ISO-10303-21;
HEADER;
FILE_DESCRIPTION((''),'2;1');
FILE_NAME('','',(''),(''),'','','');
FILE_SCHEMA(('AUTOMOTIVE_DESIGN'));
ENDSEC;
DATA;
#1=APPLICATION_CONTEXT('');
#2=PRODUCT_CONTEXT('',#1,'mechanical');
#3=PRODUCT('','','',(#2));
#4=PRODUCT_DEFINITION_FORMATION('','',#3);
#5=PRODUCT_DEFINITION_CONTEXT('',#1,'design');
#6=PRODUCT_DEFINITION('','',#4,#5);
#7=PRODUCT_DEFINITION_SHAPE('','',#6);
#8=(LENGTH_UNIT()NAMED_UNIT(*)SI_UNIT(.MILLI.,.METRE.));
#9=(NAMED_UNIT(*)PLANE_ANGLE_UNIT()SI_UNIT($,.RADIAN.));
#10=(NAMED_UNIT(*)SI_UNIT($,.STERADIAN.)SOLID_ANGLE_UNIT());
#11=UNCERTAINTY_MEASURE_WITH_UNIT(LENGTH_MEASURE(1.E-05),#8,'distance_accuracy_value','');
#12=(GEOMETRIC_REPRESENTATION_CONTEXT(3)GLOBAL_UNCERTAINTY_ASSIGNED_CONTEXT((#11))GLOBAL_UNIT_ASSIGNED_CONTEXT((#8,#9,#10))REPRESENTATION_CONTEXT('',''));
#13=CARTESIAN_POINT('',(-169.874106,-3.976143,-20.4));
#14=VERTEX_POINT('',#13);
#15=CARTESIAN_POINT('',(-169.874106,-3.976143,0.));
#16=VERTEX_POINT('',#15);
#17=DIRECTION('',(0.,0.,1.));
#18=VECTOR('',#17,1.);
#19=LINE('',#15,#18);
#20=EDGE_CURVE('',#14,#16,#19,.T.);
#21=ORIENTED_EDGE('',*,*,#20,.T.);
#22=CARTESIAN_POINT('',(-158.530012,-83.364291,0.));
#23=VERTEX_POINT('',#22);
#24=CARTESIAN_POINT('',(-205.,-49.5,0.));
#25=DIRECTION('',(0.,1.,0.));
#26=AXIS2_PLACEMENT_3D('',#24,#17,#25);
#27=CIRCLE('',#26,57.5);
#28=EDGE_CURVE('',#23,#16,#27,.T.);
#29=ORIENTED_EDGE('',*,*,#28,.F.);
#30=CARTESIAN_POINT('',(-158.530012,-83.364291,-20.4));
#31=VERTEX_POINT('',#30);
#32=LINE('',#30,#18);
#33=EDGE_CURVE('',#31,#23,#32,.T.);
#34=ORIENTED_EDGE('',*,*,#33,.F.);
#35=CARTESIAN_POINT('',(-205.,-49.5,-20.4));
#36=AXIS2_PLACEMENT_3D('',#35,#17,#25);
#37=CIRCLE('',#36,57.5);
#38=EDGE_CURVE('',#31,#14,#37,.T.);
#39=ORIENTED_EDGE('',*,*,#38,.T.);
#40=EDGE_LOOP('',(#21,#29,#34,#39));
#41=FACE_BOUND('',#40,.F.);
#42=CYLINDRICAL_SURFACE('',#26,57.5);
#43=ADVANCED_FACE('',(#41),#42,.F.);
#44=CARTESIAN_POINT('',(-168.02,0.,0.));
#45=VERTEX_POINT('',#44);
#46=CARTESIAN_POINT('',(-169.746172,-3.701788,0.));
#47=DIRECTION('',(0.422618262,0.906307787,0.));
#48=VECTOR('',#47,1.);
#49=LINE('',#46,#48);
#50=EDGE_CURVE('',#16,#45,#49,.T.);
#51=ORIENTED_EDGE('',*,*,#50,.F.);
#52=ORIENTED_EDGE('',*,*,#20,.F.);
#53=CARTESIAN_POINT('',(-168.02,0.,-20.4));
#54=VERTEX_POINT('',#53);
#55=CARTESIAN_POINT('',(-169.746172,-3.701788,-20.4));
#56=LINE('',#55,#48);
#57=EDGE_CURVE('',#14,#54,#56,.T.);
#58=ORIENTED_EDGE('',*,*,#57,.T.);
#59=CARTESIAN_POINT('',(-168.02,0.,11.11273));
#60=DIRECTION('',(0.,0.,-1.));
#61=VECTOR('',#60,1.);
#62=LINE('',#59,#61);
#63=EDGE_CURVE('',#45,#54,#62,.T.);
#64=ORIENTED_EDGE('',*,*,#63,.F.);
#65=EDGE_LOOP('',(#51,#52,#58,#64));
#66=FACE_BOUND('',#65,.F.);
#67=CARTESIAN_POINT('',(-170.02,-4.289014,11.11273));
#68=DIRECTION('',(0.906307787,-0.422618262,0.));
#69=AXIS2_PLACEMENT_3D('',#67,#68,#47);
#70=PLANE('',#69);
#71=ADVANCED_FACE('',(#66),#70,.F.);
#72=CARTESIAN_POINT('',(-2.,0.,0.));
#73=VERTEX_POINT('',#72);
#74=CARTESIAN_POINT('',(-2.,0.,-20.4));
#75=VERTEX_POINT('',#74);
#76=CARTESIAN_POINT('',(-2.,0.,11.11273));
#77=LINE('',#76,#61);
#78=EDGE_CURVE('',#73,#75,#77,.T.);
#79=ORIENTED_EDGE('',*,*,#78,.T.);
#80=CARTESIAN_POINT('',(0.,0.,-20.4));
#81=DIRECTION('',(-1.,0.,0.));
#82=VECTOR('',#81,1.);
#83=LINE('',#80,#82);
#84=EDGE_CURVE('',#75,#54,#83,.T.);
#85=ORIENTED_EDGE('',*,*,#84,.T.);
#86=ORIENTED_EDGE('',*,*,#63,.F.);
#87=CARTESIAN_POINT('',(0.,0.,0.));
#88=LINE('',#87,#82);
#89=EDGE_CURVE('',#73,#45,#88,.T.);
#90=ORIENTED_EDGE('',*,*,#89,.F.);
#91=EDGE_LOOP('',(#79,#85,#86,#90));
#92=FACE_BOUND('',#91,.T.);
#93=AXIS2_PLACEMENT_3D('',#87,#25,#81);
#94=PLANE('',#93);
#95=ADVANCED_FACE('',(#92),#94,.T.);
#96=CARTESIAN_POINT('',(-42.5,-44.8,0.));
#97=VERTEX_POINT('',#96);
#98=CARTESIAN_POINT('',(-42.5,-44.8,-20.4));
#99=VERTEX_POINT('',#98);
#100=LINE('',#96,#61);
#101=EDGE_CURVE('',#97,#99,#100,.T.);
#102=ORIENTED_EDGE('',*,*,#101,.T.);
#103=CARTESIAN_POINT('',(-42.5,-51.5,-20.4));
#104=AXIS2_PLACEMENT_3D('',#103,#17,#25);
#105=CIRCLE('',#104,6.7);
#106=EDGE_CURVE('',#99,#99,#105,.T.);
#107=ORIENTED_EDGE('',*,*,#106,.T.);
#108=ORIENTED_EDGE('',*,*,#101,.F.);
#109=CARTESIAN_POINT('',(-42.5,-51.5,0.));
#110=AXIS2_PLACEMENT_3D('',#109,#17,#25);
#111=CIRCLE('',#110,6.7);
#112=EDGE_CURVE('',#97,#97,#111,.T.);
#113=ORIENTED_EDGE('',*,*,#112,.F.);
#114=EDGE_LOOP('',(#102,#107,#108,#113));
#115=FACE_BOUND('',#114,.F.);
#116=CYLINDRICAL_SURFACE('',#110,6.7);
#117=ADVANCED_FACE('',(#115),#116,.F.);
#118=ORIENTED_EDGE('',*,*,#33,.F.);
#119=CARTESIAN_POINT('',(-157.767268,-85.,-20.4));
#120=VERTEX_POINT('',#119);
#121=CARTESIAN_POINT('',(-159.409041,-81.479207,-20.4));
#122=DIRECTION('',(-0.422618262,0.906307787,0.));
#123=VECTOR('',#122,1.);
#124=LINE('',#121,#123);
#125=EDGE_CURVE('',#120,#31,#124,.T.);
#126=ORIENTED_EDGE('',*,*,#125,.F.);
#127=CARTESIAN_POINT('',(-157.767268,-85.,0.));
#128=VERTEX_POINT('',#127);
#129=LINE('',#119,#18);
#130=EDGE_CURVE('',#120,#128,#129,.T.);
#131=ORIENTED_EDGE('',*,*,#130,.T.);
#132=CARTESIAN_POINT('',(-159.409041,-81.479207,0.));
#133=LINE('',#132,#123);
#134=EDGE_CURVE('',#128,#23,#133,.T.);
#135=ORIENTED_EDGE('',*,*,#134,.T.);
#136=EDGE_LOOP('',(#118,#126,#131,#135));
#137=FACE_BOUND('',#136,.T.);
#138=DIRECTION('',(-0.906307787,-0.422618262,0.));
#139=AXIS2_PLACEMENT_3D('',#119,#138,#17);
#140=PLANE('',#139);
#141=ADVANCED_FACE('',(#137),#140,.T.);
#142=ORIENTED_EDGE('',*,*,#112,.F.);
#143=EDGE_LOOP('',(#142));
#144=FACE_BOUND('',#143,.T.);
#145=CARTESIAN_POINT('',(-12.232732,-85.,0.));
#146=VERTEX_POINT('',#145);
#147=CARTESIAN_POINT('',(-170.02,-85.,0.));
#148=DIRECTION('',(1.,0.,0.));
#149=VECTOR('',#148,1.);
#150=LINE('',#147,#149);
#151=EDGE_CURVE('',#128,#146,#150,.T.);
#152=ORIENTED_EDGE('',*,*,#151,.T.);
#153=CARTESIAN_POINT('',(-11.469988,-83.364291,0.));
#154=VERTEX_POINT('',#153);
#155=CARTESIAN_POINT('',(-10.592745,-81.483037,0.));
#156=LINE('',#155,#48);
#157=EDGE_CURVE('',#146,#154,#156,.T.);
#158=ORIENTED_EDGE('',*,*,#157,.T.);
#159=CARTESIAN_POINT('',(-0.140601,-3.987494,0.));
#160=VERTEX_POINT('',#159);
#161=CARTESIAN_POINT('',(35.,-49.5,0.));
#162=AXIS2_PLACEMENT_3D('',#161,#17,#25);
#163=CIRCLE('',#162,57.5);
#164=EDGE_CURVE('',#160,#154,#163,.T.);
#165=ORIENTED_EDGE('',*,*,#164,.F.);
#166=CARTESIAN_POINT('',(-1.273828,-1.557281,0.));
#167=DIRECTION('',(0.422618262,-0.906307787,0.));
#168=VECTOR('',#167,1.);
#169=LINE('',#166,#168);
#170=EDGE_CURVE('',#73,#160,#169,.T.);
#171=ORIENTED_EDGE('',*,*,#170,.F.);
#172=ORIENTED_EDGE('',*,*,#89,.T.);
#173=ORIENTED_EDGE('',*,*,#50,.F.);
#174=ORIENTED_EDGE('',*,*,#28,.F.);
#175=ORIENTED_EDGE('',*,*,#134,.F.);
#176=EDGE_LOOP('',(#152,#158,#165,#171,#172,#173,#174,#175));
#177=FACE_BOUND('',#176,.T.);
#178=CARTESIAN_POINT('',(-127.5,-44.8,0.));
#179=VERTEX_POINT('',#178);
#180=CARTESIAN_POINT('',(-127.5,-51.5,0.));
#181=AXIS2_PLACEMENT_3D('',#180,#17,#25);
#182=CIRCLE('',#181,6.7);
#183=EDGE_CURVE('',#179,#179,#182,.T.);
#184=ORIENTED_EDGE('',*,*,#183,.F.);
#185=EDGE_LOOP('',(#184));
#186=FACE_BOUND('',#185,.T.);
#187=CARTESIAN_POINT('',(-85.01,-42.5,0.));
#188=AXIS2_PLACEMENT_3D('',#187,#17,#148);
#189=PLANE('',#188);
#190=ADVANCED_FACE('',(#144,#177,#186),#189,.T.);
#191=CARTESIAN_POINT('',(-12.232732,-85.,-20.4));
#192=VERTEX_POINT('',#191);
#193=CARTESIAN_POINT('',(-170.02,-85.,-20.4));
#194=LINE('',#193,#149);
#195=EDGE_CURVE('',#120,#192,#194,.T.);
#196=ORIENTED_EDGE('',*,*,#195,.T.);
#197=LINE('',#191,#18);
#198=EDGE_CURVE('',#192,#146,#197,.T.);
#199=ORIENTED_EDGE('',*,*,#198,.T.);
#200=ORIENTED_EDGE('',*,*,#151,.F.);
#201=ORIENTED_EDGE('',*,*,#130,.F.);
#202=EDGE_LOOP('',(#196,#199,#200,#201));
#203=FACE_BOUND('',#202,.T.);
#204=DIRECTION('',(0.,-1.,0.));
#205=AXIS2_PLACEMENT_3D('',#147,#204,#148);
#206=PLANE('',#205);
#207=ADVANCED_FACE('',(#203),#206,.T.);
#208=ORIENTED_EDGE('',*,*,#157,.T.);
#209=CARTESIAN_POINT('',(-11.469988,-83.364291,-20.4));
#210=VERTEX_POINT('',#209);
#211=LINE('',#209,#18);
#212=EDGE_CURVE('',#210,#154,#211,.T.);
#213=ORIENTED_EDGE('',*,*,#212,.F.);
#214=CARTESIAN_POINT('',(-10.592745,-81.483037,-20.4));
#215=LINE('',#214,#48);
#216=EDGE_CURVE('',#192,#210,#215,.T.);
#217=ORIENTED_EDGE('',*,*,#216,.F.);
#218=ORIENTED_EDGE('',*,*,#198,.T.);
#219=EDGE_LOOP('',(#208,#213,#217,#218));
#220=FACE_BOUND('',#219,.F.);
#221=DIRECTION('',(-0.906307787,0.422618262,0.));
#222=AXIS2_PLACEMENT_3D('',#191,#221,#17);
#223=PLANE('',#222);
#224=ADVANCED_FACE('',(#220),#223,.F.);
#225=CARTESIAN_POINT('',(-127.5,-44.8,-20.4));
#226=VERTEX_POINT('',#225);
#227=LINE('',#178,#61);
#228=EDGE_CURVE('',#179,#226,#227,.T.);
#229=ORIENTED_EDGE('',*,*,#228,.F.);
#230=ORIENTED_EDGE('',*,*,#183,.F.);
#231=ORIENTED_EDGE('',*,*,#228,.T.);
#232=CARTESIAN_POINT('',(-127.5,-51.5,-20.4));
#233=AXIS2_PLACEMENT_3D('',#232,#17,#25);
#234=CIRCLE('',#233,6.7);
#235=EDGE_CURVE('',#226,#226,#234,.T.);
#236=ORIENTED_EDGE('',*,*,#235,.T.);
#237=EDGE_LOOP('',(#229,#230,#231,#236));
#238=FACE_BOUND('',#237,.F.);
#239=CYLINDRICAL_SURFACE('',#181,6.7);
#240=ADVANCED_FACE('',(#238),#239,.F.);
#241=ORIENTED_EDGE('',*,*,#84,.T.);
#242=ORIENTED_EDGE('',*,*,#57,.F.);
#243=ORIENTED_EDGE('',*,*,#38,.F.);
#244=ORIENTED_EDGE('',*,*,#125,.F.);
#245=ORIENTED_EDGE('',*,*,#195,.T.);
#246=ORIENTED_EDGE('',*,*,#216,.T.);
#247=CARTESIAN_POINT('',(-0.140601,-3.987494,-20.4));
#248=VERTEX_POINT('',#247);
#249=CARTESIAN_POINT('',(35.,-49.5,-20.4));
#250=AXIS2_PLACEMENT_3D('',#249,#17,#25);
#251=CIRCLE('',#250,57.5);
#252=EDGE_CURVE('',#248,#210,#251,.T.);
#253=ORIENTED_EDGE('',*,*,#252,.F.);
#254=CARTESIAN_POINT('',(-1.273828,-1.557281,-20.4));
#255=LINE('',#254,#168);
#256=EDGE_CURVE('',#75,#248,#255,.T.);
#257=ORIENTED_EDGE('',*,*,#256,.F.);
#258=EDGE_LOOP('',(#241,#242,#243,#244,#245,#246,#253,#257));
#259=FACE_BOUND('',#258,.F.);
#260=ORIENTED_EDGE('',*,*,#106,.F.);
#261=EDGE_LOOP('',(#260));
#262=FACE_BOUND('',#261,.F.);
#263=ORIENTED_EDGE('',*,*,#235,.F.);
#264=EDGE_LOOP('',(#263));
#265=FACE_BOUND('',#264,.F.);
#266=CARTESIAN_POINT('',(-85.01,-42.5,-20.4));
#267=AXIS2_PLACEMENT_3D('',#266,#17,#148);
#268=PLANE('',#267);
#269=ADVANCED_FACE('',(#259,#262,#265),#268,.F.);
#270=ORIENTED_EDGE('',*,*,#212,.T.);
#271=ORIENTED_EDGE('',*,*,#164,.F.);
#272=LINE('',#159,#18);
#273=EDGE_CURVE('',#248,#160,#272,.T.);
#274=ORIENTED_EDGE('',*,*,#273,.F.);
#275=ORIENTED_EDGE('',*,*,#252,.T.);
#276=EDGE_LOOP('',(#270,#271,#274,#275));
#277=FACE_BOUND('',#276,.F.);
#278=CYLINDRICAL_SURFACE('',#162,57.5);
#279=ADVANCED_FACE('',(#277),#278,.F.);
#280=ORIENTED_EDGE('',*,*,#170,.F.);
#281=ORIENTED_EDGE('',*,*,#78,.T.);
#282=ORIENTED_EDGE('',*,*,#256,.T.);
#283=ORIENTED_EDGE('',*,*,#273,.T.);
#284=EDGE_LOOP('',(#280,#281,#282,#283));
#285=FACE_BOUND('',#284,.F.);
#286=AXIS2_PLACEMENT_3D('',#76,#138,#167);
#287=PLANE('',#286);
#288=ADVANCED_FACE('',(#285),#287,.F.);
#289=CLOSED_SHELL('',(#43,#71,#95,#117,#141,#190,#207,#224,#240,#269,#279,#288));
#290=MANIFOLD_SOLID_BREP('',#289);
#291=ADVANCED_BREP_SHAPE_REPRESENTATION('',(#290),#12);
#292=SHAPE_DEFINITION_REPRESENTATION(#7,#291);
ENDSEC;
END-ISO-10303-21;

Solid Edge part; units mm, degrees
sketch "Sketch1" plane through (0, 0, 0) normal (0, 0, 1) x (1, 0, 0)
  line L0 (0, 0) -> (-170.02, 0)
  line L1 (-170.02, 0) -> (-170.02, -85)
  line L2 (-170.02, -85) -> (0, -85)
  line L3 (0, -85) -> (0, 0)
extrude "Protrusion1" add sketch "Sketch1" against normal blind 20.4
sketch "Sketch2" plane through (-85.01, -42.5, 0) normal (0, 0, 1) x (0, 1, 0)
  circle A0 centre (-9, 42.49) radius 6.7
  circle A1 centre (-9, -42.51) radius 6.7
  circle A2 centre (-7, -120.01) radius 57.5
  circle A3 centre (-7, 119.99) radius 57.5
extrude "ExtrudedCutout_1" cut sketch "Sketch2" against normal blind 20.5
chamfer "Chamfer_2" distance 2 angle 65 1 edges at (-10.2327, -85, -10.2) measured on face at (-136.3402, -85, -16.796)
chamfer "Chamfer_3" distance 2 angle 65 1 edges at (-159.7673, -85, -10.2) measured on face at (-136.6535, -85, -16.796)
chamfer "Chamfer_4" distance 2 angle 65 1 edges at (-170.02, 0, -10.2) measured on face at (-26.6365, 0, -16.796)
chamfer "Chamfer_5" distance 2 angle 65 1 edges at (0, 0, -10.2) measured on face at (-26.3231, 0, -16.796)
